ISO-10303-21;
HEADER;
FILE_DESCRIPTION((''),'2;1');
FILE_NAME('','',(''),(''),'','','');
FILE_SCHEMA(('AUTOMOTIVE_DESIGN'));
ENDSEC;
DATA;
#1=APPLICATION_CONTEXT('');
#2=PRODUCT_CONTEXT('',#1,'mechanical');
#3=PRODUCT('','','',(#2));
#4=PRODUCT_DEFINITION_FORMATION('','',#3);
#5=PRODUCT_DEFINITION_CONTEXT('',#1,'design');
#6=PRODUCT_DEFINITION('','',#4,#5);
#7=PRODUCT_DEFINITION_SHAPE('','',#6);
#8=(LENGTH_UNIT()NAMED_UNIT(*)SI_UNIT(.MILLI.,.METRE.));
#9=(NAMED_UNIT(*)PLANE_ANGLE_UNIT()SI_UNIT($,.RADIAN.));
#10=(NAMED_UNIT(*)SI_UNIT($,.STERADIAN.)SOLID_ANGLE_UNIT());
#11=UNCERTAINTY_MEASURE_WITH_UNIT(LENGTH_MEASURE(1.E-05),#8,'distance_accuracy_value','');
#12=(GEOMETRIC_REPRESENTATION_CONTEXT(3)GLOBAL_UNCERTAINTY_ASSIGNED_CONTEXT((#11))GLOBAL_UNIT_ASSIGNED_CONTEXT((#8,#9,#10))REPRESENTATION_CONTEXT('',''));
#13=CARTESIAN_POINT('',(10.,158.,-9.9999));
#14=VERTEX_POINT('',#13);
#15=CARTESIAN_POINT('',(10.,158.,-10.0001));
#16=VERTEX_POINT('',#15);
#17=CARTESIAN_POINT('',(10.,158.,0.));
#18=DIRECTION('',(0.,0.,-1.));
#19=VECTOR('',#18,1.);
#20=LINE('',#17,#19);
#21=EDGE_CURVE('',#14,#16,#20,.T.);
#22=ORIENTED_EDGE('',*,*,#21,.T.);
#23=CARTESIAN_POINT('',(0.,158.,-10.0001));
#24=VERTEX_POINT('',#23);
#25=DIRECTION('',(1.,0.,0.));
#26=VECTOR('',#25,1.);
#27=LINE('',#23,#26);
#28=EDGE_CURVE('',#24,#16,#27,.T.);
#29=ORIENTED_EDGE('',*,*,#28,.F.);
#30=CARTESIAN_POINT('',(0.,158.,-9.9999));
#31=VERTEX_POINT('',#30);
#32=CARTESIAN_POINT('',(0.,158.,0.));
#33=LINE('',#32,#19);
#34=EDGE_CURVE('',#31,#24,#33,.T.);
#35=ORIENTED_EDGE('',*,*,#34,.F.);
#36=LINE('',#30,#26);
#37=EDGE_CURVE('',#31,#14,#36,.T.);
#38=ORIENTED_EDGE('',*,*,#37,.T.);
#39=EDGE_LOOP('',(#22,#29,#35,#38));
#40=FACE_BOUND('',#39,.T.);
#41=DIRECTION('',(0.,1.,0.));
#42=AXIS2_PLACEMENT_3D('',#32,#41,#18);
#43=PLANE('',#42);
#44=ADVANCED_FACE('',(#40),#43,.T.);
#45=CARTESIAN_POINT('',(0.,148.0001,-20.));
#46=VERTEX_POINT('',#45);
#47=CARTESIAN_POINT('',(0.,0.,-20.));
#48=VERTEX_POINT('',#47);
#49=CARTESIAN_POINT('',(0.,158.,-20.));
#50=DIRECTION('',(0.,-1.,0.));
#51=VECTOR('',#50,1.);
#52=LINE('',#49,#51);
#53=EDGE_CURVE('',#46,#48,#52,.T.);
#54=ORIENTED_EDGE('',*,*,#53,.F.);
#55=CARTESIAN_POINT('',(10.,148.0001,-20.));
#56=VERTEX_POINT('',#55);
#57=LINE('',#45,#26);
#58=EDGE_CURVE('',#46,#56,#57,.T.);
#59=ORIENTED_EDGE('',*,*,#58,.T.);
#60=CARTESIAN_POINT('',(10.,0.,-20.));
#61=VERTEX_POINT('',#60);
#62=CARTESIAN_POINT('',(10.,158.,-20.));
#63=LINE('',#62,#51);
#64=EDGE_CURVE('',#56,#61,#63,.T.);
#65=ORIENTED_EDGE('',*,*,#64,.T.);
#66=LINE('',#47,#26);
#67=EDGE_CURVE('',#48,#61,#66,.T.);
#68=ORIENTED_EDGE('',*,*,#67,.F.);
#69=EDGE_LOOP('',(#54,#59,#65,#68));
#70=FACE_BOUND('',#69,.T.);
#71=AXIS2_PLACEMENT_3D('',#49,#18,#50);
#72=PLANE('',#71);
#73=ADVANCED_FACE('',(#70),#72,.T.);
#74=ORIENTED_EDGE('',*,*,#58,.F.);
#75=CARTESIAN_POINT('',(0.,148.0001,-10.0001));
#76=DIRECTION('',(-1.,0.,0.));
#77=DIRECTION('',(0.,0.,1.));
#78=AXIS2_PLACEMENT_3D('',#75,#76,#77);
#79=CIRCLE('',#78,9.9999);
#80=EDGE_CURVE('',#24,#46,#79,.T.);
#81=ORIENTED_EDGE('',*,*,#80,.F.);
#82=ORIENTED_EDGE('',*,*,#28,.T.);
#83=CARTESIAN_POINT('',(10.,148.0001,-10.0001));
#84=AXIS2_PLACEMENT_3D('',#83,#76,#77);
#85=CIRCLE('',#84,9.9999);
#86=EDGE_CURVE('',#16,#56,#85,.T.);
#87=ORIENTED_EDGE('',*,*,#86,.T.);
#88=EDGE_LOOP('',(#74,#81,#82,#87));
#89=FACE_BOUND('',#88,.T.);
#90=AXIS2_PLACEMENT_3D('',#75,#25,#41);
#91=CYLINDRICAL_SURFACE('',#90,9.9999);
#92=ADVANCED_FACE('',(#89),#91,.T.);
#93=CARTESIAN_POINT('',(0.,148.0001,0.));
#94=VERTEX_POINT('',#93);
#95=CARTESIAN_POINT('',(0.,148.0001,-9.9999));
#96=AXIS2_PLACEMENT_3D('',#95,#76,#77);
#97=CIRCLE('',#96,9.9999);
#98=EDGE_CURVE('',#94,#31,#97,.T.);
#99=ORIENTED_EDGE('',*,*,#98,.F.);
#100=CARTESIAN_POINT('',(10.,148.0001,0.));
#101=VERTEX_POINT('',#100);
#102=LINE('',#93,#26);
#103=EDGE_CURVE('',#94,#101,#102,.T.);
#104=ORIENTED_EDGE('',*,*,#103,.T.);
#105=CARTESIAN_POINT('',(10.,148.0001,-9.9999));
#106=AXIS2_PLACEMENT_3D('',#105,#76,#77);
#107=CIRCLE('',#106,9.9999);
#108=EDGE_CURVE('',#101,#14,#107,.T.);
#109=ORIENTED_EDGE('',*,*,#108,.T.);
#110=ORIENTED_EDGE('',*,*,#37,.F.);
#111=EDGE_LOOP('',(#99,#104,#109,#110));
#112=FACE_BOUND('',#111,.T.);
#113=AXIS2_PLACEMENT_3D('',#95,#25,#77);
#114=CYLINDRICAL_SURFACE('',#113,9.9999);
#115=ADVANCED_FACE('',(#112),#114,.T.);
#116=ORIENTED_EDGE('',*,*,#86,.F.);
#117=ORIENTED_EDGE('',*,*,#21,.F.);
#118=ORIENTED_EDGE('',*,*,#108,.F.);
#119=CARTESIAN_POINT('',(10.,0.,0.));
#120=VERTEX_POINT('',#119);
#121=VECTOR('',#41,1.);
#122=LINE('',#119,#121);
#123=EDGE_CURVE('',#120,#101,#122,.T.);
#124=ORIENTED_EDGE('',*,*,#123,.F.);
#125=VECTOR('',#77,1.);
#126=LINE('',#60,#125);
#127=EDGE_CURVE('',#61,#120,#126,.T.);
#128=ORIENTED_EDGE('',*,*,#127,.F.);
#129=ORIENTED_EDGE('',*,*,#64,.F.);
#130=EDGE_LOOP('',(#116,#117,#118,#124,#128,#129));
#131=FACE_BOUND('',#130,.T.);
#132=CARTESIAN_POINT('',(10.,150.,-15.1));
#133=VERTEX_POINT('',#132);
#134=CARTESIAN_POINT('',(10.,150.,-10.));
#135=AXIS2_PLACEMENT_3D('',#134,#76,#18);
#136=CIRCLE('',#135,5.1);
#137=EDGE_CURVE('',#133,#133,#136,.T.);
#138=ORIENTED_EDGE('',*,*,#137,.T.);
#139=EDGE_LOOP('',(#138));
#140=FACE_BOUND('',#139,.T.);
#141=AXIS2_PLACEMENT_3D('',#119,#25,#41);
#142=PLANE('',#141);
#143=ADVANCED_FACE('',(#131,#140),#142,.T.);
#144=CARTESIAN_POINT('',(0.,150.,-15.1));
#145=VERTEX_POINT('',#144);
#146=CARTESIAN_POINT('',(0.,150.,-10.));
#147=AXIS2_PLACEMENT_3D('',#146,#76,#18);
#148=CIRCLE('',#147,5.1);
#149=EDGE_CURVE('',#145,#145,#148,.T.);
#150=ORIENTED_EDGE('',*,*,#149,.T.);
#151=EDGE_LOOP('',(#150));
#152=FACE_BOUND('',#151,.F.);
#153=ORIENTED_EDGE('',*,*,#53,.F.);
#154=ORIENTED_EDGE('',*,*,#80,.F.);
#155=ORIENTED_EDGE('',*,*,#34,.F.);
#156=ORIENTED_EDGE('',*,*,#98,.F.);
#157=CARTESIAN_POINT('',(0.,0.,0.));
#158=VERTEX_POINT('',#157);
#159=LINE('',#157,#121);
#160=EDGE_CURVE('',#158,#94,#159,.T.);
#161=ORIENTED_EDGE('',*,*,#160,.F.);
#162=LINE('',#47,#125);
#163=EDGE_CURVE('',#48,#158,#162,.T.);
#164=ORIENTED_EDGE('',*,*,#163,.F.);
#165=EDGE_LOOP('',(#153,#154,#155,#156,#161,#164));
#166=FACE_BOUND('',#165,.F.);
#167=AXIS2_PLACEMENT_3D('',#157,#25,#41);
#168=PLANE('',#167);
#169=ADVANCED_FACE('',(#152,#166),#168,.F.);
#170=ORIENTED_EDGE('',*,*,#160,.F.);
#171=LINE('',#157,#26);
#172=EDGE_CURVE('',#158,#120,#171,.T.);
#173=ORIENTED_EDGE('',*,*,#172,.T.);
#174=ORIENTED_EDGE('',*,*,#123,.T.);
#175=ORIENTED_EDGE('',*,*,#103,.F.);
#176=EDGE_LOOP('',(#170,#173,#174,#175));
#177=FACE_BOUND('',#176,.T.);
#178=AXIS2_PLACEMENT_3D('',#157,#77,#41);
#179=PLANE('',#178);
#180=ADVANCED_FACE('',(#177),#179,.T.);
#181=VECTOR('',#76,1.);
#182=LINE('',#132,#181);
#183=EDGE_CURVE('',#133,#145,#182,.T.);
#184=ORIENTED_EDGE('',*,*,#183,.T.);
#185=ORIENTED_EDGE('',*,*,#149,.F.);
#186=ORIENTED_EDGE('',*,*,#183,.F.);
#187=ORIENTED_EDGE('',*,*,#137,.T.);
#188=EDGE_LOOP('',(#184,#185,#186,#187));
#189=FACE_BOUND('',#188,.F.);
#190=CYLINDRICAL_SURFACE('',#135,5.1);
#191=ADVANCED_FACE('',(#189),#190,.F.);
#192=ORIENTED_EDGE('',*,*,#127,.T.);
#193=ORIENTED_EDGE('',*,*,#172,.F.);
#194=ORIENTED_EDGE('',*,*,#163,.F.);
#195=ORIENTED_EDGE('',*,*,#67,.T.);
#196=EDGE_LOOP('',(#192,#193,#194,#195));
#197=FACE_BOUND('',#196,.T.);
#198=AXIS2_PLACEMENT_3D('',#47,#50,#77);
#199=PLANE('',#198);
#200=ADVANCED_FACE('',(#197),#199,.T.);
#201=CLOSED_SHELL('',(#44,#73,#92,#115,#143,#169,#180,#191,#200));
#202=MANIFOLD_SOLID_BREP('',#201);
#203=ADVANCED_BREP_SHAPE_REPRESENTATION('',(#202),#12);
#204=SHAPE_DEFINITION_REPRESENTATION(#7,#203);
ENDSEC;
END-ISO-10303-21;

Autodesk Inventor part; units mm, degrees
ref_plane "YZ Plane" through (0, 0, 0) normal (1, 0, 0) x (0, 1, 0)
ref_plane "XZ Plane" through (0, 0, 0) normal (0, 1, 0) x (-1, 0, 0)
ref_plane "XY Plane" through (0, 0, 0) normal (0, 0, 1) x (1, 0, 0)
sketch "Skizze1" plane through (0, 0, 0) normal (1, 0, 0) x (0, 1, 0)
  line L0 (0, 0) -> (158, 0)
  line L1 (158, 0) -> (158, -20)
  line L2 (158, -20) -> (0, -20)
  line L3 (0, -20) -> (0, 0)
  dimension "d0" = 158
  dimension "d1" = 20
extrude "Extrusion1" add sketch "Skizze1" along normal blind 10
sketch "Skizze2" plane through (10, 0, 0) normal (1, 0, 0) x (0, 0, -1)
  line L0 (0, 0) -> (20, 0) projected
  line L1 (20, 0) -> (20, 158) projected
  point P0 (10, 150)
  dimension "d11" = 150
  dimension "d12" = 10
hole "Bohrung1" at (10, 150, -10) direction (-1, 0, 0) diameter 10.2 end through all
fillet "Rundung1" radius 10 2 edges at (5, 158, 0) (5, 158, -20)
properties part number "HolzHalter"
